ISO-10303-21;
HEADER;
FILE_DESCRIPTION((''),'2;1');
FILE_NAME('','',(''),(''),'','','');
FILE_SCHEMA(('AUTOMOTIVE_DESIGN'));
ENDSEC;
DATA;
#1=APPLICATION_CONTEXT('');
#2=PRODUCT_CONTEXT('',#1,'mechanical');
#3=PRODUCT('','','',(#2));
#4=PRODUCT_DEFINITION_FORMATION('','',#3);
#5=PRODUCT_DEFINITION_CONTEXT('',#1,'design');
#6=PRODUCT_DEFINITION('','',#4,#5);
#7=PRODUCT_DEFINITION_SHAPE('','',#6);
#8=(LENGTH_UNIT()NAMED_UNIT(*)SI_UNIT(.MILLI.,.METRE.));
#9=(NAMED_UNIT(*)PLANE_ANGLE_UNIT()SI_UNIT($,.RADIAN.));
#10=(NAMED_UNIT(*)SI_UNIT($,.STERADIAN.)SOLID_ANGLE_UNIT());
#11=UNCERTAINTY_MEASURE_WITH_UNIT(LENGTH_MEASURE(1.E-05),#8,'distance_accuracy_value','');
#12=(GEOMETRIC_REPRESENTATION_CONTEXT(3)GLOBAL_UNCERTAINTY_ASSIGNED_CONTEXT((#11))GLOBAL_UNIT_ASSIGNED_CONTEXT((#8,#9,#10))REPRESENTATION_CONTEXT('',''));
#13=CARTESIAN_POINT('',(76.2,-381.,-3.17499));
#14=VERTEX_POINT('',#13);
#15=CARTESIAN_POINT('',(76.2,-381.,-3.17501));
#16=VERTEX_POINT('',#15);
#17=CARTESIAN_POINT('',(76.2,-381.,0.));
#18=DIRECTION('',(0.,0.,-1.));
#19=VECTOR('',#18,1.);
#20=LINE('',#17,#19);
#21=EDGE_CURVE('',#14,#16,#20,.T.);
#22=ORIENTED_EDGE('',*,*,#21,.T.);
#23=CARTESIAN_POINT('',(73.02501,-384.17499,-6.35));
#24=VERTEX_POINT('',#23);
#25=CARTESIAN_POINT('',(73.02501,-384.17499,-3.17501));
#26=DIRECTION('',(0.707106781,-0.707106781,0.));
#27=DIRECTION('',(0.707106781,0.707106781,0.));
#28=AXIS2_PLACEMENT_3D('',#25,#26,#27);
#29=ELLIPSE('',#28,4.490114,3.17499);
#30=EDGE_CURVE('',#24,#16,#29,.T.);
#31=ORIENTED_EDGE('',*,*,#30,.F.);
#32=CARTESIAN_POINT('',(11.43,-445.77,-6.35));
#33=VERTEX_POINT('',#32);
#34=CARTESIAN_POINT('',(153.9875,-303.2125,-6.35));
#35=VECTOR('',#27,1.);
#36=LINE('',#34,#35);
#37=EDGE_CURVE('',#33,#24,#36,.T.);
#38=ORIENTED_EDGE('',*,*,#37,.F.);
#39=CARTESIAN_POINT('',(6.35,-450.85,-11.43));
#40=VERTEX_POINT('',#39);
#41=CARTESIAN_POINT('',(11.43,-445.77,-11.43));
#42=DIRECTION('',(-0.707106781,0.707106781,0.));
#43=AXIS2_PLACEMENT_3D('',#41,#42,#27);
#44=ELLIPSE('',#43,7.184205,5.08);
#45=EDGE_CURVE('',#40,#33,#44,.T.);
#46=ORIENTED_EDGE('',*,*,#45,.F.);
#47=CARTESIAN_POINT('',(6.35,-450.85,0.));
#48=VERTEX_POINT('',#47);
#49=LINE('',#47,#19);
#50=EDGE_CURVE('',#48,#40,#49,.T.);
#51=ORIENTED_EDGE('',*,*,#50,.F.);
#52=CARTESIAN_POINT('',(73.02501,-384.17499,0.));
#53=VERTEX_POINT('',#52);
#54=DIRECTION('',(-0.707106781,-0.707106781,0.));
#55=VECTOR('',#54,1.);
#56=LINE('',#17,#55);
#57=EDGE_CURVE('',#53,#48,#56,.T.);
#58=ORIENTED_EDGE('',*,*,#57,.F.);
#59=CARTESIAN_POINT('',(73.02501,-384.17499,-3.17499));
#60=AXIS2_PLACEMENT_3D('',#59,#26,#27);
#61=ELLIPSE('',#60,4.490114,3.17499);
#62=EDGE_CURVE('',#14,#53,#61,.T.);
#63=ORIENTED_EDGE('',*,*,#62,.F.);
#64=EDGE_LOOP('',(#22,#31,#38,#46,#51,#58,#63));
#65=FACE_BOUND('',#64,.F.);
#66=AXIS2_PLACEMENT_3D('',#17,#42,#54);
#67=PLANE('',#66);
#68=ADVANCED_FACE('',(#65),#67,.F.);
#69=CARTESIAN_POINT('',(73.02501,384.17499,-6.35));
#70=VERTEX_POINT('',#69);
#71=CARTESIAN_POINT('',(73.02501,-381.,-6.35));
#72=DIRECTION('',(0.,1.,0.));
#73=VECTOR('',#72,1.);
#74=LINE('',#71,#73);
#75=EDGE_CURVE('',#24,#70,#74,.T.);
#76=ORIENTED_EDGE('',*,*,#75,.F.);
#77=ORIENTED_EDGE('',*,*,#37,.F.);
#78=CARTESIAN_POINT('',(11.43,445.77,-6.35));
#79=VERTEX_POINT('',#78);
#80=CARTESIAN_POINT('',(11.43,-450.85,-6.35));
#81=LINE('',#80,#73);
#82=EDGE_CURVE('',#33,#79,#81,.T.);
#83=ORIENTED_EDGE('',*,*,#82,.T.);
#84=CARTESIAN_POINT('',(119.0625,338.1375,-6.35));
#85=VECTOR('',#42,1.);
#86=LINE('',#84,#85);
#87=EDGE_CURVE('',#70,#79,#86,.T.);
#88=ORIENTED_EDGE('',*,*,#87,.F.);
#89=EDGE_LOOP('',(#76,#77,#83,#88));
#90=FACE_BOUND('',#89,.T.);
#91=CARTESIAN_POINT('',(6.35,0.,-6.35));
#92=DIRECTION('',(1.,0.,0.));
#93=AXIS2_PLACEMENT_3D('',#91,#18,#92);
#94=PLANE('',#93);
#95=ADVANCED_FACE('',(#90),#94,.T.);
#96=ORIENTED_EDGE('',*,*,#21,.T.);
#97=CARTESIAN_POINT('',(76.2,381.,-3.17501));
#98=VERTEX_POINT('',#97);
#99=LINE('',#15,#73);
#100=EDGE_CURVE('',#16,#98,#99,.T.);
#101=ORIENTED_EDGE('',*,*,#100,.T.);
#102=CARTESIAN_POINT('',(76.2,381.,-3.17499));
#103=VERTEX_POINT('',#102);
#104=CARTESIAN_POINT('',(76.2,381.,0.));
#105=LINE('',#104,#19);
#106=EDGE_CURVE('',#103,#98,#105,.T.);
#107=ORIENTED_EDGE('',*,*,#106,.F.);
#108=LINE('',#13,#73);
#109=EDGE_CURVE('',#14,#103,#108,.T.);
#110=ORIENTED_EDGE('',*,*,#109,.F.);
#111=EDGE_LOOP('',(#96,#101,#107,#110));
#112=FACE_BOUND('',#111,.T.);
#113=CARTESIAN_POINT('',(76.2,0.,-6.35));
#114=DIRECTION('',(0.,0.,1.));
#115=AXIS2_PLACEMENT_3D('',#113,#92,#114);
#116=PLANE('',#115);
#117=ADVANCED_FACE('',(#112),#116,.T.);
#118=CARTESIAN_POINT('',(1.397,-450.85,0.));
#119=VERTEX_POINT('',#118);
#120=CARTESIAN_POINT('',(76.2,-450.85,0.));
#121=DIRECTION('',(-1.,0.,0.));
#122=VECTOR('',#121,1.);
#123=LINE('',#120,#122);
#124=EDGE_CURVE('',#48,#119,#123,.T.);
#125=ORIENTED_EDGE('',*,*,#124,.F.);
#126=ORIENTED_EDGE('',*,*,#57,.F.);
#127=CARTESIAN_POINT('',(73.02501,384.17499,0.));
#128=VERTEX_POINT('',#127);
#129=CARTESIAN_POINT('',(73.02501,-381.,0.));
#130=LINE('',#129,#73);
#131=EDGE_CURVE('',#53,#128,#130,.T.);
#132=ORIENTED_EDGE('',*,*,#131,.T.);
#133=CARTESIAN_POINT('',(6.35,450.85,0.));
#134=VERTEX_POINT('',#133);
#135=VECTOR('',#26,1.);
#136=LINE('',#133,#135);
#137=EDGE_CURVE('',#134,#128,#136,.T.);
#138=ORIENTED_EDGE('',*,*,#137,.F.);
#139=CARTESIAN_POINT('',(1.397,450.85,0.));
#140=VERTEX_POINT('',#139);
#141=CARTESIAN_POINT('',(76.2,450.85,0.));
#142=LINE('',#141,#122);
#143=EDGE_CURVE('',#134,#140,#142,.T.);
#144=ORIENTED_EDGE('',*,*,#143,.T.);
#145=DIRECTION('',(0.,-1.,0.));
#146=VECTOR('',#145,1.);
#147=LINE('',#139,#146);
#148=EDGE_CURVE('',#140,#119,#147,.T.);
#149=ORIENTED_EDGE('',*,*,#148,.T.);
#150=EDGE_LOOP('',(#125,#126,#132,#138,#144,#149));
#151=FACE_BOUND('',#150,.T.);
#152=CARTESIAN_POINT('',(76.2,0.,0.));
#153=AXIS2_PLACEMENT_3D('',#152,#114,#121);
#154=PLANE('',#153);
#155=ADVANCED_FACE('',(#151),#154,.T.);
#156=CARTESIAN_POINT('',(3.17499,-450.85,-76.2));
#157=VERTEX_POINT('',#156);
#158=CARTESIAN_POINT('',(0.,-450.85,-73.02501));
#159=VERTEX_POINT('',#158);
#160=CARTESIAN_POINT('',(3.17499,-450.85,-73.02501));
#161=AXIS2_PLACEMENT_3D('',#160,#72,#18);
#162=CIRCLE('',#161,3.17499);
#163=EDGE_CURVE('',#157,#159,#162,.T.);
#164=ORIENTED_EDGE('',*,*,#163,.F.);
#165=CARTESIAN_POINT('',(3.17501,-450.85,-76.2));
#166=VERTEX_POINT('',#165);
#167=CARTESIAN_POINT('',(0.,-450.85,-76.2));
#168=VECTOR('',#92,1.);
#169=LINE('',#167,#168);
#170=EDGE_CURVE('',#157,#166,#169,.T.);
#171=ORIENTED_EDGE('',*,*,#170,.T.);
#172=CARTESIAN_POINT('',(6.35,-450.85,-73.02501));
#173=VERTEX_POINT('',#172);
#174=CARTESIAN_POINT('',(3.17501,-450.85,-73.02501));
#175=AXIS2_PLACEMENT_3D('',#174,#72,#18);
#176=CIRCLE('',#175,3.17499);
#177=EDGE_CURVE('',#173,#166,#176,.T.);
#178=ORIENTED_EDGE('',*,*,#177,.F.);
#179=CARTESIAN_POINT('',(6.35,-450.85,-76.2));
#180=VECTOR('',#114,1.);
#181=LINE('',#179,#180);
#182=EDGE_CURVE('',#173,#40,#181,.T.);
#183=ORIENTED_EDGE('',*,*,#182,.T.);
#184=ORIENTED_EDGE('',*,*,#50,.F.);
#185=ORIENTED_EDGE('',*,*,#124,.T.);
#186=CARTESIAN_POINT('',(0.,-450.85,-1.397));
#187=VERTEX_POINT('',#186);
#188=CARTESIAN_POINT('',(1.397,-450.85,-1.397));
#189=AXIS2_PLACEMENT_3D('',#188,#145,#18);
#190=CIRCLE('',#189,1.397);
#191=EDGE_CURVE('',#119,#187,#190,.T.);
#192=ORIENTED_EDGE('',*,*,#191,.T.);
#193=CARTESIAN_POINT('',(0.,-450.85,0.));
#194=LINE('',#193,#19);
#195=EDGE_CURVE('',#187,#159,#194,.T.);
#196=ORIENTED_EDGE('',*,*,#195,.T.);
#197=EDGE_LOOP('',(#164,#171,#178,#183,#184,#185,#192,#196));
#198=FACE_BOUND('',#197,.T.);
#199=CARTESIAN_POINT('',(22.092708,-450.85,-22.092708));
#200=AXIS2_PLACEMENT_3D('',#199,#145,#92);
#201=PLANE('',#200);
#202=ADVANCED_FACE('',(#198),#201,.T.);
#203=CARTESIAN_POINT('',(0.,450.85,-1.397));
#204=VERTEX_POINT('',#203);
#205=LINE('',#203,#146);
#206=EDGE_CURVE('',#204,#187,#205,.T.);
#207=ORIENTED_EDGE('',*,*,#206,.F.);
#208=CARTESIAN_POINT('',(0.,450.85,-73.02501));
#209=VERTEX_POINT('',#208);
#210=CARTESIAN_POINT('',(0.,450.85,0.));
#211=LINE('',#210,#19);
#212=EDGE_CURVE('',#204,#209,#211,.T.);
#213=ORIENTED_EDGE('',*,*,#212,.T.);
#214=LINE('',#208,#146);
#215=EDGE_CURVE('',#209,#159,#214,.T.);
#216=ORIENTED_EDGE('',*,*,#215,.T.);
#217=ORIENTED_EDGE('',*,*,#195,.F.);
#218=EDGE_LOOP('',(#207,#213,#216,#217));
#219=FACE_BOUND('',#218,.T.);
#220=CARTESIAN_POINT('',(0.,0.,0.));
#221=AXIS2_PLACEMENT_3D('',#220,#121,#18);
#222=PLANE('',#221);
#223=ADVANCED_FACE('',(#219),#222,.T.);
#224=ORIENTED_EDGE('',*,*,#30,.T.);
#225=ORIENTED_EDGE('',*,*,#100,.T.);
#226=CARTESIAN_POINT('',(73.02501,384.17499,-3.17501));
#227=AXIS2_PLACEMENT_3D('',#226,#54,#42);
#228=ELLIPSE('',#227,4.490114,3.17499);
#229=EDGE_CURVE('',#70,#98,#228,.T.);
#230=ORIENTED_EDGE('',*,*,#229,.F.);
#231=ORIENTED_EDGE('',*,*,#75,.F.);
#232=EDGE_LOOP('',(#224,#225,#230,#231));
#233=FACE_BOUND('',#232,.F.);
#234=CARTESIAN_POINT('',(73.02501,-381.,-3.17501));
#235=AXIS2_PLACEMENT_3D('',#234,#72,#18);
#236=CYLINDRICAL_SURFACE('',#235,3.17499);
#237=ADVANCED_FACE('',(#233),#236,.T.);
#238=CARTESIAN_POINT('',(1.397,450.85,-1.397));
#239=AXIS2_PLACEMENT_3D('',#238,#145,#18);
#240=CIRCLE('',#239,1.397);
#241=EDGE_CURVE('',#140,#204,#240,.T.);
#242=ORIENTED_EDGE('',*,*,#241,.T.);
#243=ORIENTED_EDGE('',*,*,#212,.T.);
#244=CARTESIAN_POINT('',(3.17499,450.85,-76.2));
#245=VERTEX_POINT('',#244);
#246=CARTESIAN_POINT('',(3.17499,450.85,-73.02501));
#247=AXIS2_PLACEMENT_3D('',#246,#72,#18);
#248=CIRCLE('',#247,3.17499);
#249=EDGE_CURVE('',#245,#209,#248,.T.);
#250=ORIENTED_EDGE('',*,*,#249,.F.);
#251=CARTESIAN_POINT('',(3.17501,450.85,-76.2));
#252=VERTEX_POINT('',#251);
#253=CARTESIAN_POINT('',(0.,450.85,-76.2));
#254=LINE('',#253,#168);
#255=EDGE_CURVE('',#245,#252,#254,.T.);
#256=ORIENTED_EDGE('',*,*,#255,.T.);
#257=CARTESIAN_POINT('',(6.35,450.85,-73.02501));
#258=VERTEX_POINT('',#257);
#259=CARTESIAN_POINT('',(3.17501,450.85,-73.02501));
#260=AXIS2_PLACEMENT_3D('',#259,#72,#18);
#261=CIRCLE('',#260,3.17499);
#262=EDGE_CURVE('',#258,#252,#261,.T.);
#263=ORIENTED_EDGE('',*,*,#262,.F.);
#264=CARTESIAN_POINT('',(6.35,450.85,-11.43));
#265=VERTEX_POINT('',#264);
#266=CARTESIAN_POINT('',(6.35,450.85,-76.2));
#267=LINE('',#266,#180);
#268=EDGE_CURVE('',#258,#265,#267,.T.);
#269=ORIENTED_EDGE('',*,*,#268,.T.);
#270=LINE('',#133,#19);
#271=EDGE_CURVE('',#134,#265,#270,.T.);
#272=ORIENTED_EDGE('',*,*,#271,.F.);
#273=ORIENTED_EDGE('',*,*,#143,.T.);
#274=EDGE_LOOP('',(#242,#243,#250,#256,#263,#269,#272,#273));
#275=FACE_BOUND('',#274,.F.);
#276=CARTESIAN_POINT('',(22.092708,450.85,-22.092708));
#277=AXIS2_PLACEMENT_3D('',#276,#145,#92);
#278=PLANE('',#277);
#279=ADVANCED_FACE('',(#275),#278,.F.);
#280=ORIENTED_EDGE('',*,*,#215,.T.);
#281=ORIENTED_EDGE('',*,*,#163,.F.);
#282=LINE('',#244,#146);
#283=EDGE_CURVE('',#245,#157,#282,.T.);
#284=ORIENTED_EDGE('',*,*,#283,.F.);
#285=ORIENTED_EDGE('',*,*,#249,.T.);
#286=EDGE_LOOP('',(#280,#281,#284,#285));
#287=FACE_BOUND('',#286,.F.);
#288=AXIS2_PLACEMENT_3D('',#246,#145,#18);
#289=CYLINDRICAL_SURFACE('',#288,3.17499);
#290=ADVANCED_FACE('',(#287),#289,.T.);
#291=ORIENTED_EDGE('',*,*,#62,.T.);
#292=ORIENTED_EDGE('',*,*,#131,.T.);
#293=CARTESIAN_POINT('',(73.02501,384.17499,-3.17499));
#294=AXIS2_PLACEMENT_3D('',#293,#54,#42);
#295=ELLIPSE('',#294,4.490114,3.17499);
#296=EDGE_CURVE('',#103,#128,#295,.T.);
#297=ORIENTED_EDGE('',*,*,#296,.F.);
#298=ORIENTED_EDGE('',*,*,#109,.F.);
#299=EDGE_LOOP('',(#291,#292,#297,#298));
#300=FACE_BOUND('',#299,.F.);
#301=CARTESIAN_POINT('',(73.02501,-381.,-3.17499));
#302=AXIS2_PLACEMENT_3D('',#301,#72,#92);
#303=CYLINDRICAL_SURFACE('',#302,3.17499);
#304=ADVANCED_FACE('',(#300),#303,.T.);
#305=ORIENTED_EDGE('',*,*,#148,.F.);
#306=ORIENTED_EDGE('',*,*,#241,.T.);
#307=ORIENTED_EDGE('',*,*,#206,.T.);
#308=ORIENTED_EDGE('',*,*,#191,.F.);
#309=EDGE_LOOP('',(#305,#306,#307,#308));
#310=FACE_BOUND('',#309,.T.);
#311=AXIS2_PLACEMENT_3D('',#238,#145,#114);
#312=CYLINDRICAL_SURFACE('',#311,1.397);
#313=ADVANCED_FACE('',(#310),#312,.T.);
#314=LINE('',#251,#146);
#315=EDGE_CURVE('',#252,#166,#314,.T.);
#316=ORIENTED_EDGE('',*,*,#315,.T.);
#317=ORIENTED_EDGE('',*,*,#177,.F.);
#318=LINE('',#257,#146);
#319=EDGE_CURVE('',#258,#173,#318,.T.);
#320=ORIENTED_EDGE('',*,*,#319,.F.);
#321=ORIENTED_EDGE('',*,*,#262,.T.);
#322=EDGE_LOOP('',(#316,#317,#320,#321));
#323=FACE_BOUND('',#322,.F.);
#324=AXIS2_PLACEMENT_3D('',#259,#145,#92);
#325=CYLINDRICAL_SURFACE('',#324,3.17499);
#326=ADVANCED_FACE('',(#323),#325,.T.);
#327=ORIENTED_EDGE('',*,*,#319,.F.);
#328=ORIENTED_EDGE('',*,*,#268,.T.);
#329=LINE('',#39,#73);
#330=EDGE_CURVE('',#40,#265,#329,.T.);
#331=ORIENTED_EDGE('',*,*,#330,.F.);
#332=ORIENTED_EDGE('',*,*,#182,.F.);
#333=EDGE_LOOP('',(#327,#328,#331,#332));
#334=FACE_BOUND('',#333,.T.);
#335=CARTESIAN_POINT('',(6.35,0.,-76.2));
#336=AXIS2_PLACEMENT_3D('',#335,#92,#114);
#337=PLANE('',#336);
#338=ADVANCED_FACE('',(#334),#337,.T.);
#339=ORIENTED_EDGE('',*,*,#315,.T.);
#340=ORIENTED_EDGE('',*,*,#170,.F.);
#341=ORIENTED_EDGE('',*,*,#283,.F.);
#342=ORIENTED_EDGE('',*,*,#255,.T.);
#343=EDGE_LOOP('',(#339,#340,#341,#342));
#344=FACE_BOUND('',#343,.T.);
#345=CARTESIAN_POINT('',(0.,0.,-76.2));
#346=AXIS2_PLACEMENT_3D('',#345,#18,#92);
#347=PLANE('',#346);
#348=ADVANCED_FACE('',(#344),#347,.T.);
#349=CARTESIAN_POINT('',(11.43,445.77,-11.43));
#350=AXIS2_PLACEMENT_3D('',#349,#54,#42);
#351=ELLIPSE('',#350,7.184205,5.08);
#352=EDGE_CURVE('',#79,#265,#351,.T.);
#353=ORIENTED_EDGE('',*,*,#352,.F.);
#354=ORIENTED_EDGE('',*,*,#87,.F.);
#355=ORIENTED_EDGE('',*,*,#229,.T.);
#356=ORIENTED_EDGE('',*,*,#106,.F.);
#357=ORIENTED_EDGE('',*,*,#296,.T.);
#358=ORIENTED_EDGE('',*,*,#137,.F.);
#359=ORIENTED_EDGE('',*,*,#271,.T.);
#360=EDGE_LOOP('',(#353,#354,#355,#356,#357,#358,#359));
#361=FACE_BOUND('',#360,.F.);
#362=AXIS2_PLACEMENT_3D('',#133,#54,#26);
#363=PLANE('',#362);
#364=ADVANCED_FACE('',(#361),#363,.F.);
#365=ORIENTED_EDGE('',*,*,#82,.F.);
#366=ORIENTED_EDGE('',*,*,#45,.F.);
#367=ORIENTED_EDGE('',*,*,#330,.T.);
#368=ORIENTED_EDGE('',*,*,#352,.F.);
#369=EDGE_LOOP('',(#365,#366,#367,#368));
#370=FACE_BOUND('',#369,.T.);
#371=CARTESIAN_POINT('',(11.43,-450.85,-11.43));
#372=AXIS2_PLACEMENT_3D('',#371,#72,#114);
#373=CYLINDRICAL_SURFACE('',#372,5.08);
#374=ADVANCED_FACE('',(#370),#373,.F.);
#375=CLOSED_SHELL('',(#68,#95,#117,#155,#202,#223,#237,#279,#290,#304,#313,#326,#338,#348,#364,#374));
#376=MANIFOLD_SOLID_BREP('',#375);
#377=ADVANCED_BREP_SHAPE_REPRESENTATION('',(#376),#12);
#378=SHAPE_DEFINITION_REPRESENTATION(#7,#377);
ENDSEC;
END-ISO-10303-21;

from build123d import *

# Parameters (mm, degrees)
F1_DEPTH = 450.85
F2_R     = 5.08
F4_DEPTH = 76.201
F5_R     = 3.17499
F6_R     = 1.397


# Not quite as in the source:
# - a fillet or chamfer is up to 0.001 mm smaller than in the source, because OpenCascade refuses the exact size


with BuildPart() as f1:
    # F0 (on Front) → F1 (new body, symmetric)
    with BuildSketch(Plane.XZ):
        Polygon((76.2, 0), (0, 0), (0, -76.2), (6.35, -76.2), (6.35, -6.35), (76.2, -6.35), align=None)
    extrude(amount=F1_DEPTH, both=True)

    # F2
    f2_edges = [f1.edges().sort_by_distance(p)[0] for p in [
        (6.35, 0, -6.35),
    ]]
    fillet(f2_edges, radius=F2_R)

    # F3 (on Top) → F4 (cut, through all)
    with BuildSketch(Plane.XY):
        Polygon((76.2, 381), (76.2, 450.85), (6.35, 450.85), align=None)
        Polygon((76.2, -450.85), (76.2, -381), (6.35, -450.85), align=None)
    extrude(amount=-F4_DEPTH, mode=Mode.SUBTRACT)

    # F5 (radius 3.175 in the source; OpenCascade refuses exactly that, so slightly less here)
    f5_edges = [f1.edges().sort_by_distance(p)[0] for p in [
        (76.2, 0, -6.35),
        (76.2, 0, 0),
        (0, 0, -76.2),
        (6.35, 0, -76.2),
    ]]
    fillet(f5_edges, radius=F5_R)

    # F6
    f6_edges = [f1.edges().sort_by_distance(p)[0] for p in [
        (0, 0, 0),
    ]]
    fillet(f6_edges, radius=F6_R)


solid = f1.part
